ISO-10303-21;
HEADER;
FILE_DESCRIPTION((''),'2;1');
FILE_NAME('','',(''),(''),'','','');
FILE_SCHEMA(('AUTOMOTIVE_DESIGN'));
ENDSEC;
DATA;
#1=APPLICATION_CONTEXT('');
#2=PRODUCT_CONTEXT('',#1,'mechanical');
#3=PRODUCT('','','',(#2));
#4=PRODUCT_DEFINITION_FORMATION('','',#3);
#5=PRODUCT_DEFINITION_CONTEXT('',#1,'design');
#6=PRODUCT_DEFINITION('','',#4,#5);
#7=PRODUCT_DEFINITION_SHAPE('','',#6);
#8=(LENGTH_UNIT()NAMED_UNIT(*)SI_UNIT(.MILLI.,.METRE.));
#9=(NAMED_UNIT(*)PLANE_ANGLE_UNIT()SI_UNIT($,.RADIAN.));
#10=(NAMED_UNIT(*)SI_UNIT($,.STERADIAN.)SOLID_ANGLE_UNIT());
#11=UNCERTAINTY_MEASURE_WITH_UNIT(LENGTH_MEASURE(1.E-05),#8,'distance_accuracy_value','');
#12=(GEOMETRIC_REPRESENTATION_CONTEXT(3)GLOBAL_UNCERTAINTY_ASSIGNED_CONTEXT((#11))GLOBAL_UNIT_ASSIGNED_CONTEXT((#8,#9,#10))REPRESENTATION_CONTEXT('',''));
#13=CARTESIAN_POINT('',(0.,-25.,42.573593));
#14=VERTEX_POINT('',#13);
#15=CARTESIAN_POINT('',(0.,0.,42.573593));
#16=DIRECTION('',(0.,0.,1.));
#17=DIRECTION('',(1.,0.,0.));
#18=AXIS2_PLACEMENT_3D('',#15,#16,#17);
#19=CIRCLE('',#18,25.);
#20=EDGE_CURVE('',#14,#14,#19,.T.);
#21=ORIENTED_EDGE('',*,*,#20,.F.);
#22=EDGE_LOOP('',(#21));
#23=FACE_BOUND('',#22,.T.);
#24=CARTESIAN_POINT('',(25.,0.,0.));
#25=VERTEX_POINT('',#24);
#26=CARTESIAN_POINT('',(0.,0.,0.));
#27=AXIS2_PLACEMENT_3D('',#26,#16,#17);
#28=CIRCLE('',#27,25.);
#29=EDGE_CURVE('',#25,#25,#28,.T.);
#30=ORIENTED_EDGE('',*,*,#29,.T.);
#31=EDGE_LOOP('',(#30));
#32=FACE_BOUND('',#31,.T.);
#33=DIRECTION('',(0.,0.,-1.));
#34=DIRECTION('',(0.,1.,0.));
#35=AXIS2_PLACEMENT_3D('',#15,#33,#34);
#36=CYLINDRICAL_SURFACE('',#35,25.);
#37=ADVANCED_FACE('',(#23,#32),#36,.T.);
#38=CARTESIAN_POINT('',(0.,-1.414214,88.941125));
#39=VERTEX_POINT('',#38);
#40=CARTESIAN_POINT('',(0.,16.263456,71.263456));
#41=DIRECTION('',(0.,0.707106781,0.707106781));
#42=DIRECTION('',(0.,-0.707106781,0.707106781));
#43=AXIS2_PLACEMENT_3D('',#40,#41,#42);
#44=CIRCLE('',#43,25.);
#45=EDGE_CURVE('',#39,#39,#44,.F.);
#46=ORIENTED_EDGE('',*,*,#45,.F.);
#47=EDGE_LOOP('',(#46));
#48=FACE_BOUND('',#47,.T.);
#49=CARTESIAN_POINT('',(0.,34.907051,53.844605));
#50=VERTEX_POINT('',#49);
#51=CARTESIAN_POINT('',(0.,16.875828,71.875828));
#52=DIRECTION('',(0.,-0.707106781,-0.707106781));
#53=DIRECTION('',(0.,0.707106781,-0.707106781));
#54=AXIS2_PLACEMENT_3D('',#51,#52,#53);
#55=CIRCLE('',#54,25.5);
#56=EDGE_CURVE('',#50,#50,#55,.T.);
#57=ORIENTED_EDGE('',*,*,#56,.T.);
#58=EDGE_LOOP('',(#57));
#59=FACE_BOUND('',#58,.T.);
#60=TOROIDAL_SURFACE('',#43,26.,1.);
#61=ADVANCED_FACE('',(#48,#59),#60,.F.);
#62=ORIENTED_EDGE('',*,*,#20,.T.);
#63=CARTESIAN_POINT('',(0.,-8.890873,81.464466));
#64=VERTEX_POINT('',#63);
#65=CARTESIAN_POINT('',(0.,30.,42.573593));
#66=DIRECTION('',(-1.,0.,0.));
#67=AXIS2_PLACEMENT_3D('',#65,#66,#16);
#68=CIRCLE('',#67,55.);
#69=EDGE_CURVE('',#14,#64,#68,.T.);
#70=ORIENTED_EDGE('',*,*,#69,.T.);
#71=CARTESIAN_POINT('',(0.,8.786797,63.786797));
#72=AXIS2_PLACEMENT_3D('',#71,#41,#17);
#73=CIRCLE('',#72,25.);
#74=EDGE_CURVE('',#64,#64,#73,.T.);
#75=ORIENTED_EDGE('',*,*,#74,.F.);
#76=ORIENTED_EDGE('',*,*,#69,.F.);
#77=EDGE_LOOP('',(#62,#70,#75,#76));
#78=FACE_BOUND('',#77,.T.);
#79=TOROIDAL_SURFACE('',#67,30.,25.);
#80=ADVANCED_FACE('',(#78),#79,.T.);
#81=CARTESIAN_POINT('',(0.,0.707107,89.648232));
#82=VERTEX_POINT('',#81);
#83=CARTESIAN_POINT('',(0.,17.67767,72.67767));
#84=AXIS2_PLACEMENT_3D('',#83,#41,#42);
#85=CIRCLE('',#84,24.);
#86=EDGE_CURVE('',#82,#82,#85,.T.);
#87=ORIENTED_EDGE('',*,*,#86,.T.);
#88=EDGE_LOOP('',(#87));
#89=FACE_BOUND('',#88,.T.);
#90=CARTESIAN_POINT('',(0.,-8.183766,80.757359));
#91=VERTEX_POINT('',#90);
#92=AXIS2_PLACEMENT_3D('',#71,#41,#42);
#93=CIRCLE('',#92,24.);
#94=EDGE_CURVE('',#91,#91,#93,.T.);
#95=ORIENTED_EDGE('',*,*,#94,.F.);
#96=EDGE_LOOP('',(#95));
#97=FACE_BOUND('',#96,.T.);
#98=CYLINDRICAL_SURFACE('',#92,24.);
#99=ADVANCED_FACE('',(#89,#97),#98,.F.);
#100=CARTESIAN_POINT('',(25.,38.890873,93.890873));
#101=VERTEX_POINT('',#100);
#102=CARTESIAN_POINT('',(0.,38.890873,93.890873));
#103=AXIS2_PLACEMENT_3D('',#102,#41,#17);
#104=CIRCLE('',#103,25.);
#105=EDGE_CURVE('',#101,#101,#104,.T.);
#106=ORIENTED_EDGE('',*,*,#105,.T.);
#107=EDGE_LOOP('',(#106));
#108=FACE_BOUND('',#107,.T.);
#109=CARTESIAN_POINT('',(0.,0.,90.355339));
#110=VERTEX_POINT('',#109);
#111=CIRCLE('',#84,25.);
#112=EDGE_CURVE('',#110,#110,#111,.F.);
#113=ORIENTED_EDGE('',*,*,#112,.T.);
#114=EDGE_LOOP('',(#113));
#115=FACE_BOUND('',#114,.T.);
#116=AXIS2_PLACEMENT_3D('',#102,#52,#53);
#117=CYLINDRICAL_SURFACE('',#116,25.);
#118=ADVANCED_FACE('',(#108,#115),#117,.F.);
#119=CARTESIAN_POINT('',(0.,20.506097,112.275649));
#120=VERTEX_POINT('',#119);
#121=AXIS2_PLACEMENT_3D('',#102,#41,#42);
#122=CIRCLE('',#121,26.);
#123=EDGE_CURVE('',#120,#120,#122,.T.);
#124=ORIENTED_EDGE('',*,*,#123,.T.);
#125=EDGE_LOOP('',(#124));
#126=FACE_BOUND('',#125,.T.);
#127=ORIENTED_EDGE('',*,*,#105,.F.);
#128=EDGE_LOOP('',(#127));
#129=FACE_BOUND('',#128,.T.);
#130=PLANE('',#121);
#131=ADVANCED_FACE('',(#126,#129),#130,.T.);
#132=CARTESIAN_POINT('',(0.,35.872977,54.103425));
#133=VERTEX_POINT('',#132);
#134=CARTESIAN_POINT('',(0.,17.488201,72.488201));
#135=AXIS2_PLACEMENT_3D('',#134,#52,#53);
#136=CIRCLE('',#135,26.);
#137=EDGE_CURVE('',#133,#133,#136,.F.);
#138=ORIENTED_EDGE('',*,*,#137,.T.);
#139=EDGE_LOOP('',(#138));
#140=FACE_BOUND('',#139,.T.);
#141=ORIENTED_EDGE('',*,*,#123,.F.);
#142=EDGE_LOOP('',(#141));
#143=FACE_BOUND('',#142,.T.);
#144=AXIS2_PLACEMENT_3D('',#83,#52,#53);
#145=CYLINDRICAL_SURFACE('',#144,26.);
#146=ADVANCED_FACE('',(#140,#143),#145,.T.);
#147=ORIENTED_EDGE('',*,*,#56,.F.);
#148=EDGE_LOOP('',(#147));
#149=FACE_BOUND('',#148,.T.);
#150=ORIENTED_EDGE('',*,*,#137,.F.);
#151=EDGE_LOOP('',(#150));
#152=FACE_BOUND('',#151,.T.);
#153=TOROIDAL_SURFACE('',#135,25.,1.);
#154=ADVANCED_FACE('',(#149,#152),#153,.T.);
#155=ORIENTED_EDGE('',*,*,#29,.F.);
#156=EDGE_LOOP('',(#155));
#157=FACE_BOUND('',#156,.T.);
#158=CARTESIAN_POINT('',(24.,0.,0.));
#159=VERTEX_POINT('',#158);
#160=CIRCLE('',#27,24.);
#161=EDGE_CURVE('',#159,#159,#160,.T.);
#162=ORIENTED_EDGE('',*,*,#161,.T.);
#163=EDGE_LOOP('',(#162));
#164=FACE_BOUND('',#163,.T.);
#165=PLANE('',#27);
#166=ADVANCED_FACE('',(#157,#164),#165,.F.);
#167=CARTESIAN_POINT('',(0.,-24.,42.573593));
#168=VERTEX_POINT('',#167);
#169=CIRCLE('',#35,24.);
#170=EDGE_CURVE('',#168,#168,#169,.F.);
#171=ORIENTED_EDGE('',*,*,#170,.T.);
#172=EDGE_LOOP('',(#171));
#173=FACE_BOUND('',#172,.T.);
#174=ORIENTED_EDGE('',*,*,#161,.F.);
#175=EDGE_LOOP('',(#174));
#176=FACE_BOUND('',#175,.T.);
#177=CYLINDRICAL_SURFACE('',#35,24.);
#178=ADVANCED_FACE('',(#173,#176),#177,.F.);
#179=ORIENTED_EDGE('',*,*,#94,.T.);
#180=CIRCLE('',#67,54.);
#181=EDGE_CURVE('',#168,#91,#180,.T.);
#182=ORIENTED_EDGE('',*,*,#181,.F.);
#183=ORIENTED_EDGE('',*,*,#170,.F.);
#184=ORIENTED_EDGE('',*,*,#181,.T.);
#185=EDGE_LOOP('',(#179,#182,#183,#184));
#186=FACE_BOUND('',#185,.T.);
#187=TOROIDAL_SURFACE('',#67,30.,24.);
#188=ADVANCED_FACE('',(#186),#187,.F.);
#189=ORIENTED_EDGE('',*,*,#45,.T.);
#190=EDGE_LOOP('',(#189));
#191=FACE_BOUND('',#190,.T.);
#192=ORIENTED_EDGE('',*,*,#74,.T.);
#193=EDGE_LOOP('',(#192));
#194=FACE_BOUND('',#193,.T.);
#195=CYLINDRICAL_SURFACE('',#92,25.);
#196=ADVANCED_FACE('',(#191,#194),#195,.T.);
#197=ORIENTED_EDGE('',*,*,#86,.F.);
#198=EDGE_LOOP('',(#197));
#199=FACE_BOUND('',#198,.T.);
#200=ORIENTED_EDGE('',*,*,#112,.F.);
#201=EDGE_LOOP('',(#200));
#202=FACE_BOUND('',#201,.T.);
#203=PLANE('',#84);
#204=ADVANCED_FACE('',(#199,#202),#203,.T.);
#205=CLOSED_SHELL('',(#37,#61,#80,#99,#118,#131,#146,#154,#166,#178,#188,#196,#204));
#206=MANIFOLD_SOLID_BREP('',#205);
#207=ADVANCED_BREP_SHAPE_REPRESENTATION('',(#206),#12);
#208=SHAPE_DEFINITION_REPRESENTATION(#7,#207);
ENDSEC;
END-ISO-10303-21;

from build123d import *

# Parameters (mm, degrees)
ESQUISSE6_R        = 25
ESQUISSE6_R_2      = 24
ESQUISSE8_R        = 26
ESQUISSE8_R_2      = 24
EXTRU_MINCE1_DEPTH = 1
EXTRU_MINCE2_START = 30
ESQUISSE9_R        = 26
ESQUISSE9_R_2      = 25
EXTRU_MINCE2_DEPTH = 30
CONG_1_R           = 1
CONG_2_R           = 1


with BuildPart() as part:
    # Balayage-Mince2: sweep along a path in Esquisse7
    with BuildLine(Plane(origin=(0, 0, 0), x_dir=(0, 0, -1), z_dir=(1, 0, 0))) as balayage_mince2_path:
        Line((0, 0), (-42.573593129, 0))
        ThreePointArc((-42.573593129, 0), (-54.0540961, 2.283614025), (-63.786796564, 8.786796564))
        Line((-63.786796564, 8.786796564), (-71.970562748, 16.970562748))
    # Esquisse6 → Balayage-Mince2 (sweep)
    with BuildSketch(Plane.XY):
        Circle(ESQUISSE6_R)
        Circle(ESQUISSE6_R_2, mode=Mode.SUBTRACT)
    sweep(path=balayage_mince2_path.line)



with BuildPart() as body_2:
    # Esquisse8 → Extru.-Mince1 (new body)
    with BuildSketch(Plane(origin=(0, 44.470562748, 44.470562748), x_dir=(1, 0, 0), z_dir=(0, 0.7071067811865487, 0.7071067811865464))):
        with Locations((0, -38.890872965)):
            Circle(ESQUISSE8_R)
        with Locations((0, -38.890872965)):
            Circle(ESQUISSE8_R_2, mode=Mode.SUBTRACT)
    extrude(amount=EXTRU_MINCE1_DEPTH)


with BuildPart() as part_1:
    add(part.part)

    add(body_2.part)  # Extru.-Mince2 merges body 2
    # Esquisse9 → Extru.-Mince2 (add)
    with BuildSketch(Plane(origin=(0, 45.17766953, 45.17766953), x_dir=(1, 0, 0), z_dir=(0, 0.7071067811865487, 0.7071067811865464)).offset(EXTRU_MINCE2_START)):
        with Locations((0, -38.890872965)):
            Circle(ESQUISSE9_R)
        with Locations((0, -38.890872965)):
            Circle(ESQUISSE9_R_2, mode=Mode.SUBTRACT)
    extrude(amount=-EXTRU_MINCE2_DEPTH)

    # Congé1
    cong_1_edges = [part_1.edges().sort_by_distance(p)[0] for p in [
        (-25, 16.970562748, 71.970562748),
    ]]
    fillet(cong_1_edges, radius=CONG_1_R - 0.0001)  # a hair under: the kernel refuses the full size

    # Congé2
    cong_2_edges = [part_1.edges().sort_by_distance(p)[0] for p in [
        (-26, 16.970562748, 71.970562748),
    ]]
    fillet(cong_2_edges, radius=CONG_2_R)


solid = part_1.part
